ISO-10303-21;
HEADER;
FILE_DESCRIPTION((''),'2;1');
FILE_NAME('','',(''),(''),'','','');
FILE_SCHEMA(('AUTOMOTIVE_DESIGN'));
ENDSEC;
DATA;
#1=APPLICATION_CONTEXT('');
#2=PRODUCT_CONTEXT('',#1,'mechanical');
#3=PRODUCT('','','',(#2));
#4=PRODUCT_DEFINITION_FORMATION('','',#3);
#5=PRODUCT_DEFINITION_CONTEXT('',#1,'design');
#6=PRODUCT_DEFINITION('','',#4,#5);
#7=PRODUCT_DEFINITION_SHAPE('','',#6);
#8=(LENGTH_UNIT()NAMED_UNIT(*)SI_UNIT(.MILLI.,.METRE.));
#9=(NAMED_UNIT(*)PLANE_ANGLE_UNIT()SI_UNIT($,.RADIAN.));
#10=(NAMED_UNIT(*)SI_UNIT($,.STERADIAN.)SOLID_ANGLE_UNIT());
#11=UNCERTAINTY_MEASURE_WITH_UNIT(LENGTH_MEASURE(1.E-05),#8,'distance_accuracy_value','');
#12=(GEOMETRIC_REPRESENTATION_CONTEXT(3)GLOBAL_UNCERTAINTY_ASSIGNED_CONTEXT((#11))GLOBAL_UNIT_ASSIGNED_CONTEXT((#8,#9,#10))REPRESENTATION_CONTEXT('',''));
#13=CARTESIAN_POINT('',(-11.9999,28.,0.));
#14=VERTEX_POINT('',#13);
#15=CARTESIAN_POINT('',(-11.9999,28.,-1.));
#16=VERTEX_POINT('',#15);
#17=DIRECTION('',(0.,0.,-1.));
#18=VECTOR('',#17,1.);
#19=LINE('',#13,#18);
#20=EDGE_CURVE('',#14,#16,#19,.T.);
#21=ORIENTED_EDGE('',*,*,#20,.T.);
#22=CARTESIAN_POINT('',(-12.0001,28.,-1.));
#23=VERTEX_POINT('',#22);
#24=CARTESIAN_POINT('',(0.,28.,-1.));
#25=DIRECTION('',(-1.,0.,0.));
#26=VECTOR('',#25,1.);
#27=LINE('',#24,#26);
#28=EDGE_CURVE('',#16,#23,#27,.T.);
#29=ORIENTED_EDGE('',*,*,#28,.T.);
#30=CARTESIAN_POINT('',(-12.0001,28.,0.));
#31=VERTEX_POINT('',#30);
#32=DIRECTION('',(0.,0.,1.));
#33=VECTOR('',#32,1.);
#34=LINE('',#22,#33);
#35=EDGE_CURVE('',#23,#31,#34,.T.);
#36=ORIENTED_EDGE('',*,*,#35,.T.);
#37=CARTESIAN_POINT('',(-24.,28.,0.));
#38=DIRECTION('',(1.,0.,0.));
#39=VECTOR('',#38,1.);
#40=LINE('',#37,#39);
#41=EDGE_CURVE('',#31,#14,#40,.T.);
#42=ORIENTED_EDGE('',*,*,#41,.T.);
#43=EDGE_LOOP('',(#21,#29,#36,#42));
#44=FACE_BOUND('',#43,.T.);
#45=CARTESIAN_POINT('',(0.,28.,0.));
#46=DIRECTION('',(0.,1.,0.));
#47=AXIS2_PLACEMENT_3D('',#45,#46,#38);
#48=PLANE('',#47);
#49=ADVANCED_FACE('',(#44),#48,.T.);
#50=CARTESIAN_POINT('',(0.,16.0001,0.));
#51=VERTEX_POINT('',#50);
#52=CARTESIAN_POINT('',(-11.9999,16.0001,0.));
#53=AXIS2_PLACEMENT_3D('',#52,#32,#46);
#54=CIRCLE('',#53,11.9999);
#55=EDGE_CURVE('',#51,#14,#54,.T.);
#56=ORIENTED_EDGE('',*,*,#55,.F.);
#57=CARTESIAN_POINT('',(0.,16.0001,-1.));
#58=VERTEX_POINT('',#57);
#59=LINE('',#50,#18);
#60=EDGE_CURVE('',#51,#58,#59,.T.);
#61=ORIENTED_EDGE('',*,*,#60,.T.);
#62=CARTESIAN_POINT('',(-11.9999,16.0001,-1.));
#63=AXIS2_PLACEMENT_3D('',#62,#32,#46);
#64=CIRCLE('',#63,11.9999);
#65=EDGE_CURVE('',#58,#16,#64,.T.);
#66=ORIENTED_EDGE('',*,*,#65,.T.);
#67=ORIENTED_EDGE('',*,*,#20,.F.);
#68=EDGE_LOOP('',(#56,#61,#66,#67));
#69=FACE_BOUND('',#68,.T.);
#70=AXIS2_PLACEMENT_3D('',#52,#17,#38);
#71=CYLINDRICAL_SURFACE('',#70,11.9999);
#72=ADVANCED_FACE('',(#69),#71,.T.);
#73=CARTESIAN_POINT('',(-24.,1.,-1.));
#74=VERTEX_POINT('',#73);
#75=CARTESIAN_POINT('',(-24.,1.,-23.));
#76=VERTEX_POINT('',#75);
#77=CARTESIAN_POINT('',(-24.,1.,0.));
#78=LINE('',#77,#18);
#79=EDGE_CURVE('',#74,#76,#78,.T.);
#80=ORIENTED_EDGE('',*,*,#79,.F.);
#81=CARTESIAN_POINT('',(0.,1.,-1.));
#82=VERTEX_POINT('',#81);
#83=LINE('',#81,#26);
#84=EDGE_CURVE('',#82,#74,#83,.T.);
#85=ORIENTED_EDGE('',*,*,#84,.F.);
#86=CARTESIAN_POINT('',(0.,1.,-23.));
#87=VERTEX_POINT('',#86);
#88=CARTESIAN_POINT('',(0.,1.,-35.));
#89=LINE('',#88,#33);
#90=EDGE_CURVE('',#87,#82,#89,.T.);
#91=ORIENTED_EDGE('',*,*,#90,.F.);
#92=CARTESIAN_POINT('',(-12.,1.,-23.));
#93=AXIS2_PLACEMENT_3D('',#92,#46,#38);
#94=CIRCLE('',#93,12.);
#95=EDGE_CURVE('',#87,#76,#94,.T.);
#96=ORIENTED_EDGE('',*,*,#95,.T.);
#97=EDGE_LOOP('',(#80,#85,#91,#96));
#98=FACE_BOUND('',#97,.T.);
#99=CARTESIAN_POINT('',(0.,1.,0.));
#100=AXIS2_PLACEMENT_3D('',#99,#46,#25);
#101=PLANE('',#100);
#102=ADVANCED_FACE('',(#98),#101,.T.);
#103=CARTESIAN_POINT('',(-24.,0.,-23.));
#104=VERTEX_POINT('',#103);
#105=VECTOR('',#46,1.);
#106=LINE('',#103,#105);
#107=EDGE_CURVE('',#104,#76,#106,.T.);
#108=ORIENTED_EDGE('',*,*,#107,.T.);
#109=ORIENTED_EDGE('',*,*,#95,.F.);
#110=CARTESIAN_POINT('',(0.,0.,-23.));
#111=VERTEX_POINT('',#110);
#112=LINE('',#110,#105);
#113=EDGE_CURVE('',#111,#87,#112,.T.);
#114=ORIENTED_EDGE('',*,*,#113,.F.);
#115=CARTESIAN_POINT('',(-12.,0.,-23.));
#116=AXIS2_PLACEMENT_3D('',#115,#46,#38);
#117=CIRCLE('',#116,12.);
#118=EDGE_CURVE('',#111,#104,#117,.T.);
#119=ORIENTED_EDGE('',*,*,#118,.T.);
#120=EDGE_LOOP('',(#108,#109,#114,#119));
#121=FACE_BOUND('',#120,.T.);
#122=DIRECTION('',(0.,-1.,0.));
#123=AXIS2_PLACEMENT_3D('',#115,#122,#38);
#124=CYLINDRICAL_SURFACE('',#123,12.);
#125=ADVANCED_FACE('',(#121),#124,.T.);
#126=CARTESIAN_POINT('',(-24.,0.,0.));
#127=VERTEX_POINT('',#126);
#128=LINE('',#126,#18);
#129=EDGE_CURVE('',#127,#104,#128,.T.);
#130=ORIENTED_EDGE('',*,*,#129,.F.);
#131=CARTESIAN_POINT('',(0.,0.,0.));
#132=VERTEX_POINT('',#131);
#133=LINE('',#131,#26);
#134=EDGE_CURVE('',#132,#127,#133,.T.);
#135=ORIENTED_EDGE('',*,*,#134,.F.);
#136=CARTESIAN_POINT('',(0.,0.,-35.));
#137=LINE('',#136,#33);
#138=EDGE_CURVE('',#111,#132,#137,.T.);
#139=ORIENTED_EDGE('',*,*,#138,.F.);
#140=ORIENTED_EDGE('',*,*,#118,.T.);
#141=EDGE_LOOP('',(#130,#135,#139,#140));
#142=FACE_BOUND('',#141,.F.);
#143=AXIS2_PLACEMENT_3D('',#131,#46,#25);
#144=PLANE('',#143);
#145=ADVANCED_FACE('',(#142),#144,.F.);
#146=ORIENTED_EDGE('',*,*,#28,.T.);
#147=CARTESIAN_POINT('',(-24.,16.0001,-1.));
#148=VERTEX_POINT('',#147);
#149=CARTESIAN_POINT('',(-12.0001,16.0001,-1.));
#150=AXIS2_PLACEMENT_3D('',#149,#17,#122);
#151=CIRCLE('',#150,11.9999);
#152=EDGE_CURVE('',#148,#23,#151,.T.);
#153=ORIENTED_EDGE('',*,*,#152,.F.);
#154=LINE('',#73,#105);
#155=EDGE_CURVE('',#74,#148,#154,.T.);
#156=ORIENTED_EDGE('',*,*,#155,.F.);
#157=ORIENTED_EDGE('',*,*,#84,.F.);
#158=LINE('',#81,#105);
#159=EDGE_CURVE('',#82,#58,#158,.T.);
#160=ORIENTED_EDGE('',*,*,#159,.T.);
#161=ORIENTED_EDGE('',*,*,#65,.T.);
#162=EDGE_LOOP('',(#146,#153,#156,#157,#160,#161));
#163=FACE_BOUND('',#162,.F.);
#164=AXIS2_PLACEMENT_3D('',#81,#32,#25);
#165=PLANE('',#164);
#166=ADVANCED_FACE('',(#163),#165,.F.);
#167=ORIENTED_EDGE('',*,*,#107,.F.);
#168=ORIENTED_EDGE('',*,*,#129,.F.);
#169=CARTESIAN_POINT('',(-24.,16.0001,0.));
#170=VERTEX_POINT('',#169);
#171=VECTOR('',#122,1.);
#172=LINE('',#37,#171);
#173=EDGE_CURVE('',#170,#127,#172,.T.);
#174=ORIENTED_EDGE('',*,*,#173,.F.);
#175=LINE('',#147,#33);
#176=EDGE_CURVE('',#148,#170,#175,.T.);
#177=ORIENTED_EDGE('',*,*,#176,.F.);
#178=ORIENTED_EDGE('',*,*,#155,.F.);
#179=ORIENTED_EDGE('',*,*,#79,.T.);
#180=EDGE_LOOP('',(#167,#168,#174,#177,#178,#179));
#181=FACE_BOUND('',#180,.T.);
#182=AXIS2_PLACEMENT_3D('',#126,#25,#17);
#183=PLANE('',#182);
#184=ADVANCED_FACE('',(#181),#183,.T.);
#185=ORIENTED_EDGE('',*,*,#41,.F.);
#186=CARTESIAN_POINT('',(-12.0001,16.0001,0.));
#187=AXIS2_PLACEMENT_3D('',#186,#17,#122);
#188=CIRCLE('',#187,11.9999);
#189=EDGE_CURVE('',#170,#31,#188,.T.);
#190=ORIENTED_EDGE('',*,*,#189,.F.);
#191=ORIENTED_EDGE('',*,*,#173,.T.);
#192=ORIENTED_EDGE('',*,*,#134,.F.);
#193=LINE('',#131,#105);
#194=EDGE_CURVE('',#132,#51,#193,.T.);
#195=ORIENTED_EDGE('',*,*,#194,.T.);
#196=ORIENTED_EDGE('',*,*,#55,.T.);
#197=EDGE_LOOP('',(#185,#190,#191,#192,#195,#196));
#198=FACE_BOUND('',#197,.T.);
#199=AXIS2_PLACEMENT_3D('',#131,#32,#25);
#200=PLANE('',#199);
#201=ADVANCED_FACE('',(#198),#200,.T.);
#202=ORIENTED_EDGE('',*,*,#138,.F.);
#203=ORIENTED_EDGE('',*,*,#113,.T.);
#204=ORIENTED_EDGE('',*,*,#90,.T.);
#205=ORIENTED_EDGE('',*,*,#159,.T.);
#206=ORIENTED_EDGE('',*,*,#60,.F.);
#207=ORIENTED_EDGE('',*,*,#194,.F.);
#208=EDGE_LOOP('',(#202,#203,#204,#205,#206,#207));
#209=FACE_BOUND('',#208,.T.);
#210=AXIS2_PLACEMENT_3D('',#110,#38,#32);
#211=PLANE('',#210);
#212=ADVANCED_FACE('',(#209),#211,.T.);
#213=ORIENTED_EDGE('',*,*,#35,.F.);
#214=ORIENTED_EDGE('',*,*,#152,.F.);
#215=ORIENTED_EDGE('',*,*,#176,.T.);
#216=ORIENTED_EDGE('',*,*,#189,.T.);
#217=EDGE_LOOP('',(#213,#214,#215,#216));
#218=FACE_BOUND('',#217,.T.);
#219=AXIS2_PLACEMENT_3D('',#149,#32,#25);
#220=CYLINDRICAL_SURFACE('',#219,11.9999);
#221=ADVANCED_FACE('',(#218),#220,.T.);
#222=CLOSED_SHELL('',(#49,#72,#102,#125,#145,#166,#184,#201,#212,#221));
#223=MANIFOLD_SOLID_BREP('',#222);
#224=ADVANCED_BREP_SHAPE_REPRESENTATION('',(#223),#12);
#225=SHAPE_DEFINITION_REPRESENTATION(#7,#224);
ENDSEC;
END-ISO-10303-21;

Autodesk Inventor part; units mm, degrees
ref_plane "YZ Plane" through (0, 0, 0) normal (1, 0, 0) x (0, 1, 0)
ref_plane "XZ Plane" through (0, 0, 0) normal (0, 1, 0) x (-1, 0, 0)
ref_plane "XY Plane" through (0, 0, 0) normal (0, 0, 1) x (1, 0, 0)
sketch "Sketch1" plane through (0, 0, 0) normal (0, 1, 0) x (-1, 0, 0)
  line L0 (0, 0) -> (24, 0)
  line L1 (24, 0) -> (24, -35)
  line L2 (0, -35) -> (0, 0)
  arc A0 (0, -23) -> (24, -23) centre (12, -23) ccw
  dimension "d0" = 24
  dimension "d1" = 35
extrude "Extrusion1" add sketch "Sketch1" along normal blind 1
sketch "Sketch2" plane through (0, 1, 0) normal (0, 1, 0) x (1, 0, 0)
  line L0 (-24, 0) -> (0, 0) projected
  line L1 (0, 0) -> (0, 23) projected
  line L2 (-24, 0) -> (0, 0)
  line L3 (0, 0) -> (0, 1)
  line L4 (0, 1) -> (-24, 1)
  line L5 (-24, 1) -> (-24, 0)
  dimension "d4" = 1
extrude "Extrusion2" add sketch "Sketch2" along normal blind 27
fillet "Fillet1" radius 12 2 edges at (0, 28, -0.5) (-24, 28, -0.5)
properties part number "linkage connector"
